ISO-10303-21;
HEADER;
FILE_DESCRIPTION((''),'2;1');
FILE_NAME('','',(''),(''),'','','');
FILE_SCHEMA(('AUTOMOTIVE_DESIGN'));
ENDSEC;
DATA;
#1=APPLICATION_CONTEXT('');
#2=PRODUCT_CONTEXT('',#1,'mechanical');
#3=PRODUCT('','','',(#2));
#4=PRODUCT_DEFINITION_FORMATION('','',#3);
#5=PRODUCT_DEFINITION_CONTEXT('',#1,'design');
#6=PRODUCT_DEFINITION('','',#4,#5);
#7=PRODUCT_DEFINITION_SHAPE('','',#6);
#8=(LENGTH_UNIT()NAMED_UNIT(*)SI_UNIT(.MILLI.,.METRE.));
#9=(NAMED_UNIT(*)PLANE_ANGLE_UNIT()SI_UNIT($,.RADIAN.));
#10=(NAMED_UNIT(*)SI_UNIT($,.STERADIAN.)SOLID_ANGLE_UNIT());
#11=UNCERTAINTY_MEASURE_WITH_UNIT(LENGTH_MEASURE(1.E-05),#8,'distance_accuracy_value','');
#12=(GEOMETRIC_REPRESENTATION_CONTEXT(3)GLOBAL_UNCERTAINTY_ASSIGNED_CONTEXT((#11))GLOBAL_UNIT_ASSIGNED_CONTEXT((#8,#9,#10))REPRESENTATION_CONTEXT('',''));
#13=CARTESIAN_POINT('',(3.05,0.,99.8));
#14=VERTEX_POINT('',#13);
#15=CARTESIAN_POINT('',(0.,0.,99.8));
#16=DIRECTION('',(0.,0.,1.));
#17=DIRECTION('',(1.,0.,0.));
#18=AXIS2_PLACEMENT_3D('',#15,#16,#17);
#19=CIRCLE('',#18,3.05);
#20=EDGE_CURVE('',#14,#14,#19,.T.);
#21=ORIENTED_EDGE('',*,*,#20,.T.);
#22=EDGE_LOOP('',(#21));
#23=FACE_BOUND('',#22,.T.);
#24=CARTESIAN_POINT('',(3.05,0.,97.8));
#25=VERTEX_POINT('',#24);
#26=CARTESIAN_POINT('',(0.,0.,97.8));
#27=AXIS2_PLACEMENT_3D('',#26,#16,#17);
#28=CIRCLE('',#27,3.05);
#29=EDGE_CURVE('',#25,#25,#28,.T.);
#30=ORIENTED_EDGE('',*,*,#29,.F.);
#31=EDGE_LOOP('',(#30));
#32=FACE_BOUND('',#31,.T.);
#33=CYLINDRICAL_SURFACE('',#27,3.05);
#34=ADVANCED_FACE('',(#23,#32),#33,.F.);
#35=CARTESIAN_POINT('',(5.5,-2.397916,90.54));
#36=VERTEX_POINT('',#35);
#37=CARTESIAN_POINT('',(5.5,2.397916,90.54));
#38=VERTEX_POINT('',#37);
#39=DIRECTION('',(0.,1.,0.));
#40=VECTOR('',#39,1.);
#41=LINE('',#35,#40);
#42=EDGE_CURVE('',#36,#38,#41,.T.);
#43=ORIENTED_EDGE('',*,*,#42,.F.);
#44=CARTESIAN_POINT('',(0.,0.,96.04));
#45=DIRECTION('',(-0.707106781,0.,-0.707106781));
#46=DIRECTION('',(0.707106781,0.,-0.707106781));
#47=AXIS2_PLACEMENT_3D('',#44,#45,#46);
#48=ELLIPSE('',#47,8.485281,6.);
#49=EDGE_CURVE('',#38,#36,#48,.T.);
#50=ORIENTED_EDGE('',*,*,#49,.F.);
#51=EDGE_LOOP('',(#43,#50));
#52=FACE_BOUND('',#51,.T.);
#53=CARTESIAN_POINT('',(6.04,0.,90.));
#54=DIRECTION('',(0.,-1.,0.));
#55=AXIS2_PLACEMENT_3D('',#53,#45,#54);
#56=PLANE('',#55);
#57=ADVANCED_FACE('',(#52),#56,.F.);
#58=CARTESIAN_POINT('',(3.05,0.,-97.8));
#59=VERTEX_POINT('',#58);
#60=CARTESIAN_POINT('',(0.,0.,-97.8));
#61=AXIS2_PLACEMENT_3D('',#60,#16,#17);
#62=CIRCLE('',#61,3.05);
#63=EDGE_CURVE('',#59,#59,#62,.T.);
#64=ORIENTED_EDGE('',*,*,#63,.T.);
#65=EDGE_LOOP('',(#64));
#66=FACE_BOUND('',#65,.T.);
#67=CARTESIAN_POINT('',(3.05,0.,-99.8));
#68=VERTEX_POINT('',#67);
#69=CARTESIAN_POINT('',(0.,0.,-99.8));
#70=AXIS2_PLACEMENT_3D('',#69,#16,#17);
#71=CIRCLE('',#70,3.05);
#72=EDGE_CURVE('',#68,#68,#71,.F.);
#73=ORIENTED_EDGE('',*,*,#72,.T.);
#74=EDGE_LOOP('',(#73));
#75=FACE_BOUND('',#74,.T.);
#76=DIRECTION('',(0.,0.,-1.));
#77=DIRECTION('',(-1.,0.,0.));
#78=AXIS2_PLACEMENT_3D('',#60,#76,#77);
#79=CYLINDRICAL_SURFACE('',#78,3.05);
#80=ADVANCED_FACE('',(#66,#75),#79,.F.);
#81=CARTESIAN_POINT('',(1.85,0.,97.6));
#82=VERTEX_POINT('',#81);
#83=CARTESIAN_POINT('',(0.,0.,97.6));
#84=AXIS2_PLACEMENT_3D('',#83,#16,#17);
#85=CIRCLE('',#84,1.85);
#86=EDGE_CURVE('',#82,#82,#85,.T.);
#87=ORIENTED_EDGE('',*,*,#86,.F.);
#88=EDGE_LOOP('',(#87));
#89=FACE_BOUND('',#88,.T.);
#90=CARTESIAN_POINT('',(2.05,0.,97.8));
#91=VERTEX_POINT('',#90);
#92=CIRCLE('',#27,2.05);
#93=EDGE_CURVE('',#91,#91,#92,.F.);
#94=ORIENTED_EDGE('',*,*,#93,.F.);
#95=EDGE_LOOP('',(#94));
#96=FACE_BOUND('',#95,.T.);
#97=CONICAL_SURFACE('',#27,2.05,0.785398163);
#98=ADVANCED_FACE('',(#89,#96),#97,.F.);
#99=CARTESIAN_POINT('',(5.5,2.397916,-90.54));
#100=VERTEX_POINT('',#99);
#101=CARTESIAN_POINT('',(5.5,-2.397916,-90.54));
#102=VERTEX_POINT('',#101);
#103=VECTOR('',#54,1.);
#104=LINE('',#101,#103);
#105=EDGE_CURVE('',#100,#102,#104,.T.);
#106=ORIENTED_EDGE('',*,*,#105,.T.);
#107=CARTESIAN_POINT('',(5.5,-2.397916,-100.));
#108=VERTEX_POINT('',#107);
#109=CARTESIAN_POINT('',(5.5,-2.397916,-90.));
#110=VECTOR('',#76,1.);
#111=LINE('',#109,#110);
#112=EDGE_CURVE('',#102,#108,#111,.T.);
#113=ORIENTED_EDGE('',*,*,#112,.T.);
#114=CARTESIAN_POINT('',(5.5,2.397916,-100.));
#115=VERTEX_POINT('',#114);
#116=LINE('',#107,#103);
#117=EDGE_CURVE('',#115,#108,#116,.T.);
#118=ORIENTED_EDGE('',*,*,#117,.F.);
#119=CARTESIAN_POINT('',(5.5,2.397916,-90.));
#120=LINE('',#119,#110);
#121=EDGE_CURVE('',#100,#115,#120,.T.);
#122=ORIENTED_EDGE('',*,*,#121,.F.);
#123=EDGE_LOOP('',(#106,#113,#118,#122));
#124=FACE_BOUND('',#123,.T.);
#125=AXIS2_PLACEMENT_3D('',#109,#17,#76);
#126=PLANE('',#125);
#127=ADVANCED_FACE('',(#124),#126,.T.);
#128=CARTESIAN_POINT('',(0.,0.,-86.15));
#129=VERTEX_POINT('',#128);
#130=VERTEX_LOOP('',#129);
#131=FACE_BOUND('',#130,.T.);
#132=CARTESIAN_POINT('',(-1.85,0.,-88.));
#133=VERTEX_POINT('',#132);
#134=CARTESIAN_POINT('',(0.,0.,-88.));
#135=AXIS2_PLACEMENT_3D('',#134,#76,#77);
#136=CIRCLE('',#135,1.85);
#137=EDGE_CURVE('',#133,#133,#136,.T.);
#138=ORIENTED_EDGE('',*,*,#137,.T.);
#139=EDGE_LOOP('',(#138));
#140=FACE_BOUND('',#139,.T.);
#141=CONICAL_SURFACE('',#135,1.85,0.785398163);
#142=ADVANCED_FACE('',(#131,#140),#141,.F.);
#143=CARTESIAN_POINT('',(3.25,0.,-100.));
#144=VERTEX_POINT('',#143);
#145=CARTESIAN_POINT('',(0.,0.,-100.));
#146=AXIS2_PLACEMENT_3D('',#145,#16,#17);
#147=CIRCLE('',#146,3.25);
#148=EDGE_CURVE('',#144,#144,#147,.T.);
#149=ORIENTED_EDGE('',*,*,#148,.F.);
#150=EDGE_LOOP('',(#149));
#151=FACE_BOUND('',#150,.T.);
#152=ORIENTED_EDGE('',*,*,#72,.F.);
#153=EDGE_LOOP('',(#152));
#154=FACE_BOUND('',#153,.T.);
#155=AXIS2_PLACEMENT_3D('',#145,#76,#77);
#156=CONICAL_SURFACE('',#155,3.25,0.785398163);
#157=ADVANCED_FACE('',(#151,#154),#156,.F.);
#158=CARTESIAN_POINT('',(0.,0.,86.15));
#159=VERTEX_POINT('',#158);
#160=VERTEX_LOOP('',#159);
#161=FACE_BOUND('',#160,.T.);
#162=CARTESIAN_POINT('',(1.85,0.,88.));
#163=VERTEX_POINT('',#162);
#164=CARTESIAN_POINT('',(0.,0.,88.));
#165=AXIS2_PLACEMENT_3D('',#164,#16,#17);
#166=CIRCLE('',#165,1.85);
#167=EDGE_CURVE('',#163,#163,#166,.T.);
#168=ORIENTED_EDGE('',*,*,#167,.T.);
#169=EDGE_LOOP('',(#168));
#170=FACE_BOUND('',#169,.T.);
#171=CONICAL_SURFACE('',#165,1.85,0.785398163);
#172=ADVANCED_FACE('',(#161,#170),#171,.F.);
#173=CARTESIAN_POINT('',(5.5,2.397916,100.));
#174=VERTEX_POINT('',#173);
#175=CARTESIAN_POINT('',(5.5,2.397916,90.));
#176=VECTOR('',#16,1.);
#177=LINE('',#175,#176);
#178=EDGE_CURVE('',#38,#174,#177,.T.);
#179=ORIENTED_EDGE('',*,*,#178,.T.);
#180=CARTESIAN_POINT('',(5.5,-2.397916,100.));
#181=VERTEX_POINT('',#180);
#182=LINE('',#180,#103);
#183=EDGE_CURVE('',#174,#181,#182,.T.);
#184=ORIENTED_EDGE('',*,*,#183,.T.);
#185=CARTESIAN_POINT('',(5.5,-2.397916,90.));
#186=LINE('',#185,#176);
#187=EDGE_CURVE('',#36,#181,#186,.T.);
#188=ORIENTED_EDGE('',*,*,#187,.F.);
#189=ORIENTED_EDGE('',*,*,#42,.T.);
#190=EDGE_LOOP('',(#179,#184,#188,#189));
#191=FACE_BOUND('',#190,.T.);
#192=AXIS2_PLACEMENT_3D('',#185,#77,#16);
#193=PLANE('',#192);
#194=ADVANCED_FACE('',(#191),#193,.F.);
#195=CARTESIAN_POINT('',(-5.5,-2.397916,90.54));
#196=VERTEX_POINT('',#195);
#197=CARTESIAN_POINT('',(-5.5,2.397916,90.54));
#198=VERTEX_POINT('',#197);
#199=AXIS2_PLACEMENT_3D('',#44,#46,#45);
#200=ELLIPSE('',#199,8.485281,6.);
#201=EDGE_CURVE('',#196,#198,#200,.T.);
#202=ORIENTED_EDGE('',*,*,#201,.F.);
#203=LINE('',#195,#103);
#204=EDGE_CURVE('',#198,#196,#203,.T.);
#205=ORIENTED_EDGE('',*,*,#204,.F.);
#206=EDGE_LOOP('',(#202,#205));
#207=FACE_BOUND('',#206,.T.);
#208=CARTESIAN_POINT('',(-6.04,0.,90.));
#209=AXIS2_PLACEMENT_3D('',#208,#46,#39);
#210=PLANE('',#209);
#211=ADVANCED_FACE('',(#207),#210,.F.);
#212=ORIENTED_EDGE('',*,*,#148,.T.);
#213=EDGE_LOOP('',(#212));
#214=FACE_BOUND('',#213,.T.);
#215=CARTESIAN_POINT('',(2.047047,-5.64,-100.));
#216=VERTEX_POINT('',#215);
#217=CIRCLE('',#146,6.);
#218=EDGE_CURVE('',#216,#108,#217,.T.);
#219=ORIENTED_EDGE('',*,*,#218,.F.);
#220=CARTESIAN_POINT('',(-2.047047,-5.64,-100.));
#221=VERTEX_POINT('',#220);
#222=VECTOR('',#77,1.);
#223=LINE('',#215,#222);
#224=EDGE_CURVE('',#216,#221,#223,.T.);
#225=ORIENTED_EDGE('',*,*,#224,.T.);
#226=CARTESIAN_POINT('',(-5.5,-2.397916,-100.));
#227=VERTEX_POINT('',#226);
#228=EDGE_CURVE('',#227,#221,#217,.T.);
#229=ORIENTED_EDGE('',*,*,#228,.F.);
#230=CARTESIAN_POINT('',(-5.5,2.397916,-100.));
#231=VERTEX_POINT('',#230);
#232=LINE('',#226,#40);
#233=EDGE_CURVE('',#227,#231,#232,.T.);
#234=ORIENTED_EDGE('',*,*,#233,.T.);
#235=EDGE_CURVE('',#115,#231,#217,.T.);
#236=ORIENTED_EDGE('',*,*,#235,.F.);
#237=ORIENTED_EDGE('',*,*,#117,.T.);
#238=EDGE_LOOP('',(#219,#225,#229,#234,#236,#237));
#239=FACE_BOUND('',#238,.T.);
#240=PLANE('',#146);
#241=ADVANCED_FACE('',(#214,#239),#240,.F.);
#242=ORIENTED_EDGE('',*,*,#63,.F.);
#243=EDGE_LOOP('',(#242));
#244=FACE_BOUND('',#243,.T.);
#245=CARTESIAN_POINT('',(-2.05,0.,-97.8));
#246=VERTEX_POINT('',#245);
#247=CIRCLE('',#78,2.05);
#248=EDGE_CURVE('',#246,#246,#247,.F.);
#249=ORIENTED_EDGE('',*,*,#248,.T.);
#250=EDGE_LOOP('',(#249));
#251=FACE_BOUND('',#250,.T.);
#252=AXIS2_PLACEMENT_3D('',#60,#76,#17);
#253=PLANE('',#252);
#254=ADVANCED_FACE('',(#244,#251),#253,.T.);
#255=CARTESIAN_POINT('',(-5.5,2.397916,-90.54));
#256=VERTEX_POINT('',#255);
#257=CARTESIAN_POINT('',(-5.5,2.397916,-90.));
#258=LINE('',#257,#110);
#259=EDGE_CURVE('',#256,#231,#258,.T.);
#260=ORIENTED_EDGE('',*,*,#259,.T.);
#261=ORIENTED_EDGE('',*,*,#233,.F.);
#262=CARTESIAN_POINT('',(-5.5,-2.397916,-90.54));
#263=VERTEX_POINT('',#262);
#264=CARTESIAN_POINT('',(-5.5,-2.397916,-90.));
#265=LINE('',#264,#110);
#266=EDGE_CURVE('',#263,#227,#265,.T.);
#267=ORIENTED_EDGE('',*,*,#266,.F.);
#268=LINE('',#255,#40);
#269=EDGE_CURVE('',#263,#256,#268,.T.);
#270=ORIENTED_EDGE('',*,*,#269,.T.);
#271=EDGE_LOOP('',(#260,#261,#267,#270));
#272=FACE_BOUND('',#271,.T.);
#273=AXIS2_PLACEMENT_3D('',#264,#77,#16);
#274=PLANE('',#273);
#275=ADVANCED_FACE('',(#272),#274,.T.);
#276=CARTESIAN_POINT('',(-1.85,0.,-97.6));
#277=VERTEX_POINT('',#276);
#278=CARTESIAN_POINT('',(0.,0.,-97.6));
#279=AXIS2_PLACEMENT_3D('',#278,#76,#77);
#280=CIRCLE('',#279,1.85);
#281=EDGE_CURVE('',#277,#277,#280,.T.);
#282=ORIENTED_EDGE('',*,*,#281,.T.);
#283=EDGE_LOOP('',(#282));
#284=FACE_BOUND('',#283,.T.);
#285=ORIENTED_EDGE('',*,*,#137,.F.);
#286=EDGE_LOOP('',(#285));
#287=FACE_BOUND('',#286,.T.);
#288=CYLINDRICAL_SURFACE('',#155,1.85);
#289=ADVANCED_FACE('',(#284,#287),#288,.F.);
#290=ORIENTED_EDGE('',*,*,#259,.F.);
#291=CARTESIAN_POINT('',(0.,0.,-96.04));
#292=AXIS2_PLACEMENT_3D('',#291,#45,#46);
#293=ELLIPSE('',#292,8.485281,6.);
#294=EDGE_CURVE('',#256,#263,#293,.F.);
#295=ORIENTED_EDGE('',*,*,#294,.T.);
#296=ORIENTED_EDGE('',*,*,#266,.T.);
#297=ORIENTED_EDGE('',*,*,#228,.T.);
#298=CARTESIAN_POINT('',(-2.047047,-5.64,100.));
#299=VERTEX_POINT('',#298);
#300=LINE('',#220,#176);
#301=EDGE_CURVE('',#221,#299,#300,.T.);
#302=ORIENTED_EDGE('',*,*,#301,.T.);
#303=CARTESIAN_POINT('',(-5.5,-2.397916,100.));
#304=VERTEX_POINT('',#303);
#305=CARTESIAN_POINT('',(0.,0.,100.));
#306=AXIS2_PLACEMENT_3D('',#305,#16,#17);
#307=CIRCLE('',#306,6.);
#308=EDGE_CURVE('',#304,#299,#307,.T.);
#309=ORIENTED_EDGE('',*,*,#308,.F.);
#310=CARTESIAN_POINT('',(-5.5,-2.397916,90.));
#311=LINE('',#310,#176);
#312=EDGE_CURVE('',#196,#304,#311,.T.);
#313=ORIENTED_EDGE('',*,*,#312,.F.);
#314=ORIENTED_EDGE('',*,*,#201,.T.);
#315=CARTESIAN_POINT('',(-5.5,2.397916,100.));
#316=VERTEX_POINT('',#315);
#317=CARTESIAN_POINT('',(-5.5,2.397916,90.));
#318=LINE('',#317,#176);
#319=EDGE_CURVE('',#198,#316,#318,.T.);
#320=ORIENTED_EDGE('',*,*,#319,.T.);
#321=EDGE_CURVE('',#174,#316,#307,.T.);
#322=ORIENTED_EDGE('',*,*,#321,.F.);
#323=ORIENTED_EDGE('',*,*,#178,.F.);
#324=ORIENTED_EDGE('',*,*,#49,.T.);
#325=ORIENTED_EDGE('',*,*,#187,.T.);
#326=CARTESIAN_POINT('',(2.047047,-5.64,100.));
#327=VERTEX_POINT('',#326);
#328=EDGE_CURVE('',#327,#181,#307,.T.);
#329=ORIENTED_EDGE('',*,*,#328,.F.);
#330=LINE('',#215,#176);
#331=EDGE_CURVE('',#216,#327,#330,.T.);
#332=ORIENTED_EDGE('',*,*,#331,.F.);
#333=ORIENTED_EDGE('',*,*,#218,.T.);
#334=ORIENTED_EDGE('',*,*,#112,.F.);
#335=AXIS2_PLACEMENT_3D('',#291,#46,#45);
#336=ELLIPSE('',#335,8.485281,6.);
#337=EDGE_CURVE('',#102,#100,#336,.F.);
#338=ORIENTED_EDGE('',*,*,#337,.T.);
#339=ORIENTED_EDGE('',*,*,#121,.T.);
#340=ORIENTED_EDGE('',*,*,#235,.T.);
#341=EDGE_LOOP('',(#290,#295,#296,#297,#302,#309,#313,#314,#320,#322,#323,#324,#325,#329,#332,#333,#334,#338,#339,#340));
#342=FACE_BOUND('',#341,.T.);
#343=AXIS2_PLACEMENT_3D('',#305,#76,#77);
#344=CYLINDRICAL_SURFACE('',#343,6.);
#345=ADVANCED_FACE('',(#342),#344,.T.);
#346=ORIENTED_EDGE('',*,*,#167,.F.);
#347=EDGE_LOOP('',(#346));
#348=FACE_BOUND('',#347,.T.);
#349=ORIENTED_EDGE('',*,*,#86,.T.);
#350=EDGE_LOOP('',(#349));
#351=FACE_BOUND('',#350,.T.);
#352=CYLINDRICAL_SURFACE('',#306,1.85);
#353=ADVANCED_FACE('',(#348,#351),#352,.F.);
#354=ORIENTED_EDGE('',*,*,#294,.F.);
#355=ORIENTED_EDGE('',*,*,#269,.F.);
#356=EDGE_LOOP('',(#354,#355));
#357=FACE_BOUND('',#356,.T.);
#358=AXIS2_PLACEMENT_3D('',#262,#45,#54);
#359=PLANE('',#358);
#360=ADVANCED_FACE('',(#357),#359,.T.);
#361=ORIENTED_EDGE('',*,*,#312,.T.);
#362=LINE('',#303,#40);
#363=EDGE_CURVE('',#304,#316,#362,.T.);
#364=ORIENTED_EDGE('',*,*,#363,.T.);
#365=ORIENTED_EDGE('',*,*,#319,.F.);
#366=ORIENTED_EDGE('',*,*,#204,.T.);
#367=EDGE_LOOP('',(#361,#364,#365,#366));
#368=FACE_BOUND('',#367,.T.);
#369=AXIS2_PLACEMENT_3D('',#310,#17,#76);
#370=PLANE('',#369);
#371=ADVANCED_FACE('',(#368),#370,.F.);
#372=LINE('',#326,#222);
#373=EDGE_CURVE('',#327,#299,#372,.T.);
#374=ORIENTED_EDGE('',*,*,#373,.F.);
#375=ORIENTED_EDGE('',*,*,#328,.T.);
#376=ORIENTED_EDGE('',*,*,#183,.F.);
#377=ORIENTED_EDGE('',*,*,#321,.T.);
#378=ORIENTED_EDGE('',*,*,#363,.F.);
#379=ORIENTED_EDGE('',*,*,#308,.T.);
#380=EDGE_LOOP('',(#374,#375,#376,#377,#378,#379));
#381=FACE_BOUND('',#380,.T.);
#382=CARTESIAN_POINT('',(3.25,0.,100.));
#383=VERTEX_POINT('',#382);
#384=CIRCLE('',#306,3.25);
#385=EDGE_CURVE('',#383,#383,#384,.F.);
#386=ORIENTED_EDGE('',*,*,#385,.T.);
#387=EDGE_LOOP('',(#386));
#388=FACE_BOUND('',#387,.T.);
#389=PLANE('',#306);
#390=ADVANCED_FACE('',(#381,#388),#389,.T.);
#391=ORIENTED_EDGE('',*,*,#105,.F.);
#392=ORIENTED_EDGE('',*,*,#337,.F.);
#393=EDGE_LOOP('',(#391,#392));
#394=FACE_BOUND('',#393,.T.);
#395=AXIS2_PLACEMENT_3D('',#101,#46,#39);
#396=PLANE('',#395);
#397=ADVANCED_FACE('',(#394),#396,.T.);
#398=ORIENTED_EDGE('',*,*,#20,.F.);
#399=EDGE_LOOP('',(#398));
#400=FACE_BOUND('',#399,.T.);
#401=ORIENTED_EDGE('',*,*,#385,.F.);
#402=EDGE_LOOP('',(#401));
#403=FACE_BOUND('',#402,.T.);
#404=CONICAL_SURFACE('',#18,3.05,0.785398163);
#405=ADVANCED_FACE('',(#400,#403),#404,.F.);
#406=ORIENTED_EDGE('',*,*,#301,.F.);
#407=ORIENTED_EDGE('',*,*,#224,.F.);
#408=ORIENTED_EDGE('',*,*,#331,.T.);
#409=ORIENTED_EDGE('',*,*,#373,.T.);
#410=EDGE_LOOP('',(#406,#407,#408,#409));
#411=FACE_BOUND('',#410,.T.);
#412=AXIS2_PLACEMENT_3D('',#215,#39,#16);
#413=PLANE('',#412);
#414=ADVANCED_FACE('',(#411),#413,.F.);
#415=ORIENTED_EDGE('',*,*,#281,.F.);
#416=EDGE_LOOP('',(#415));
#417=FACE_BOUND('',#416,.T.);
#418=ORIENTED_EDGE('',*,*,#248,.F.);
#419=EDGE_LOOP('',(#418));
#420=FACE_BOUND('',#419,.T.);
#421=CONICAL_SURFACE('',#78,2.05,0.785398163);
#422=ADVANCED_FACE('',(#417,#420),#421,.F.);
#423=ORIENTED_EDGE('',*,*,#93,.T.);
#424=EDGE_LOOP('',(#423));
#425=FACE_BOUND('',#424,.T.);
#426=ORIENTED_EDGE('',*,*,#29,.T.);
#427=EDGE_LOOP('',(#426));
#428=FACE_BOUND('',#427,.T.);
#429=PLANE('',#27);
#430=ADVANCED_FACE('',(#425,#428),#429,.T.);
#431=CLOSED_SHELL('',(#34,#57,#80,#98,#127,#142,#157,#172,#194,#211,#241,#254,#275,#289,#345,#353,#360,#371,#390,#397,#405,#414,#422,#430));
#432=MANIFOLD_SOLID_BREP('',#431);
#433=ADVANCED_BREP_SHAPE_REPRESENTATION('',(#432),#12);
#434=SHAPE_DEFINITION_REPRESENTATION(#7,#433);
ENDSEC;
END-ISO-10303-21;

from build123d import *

# Parameters (mm, degrees)
SKETCH1_R                = 6
BOSS_EXTRUDE1_DEPTH      = 100
SKETCH5_R                = 3.05
CUT_EXTRUDE1_DEPTH       = 2.2
CHAMFER1_SIZE            = 0.2
CUT_EXTRUDE2_DEPTH       = 201.179919073
CUT_EXTRUDE4_DEPTH       = 10
CHAMFER3_SIZE            = 0.54
CHAMFER3_OF_MIRROR3_SIZE = 0.54


with BuildPart() as part:
    # Sketch1 → Boss-Extrude1 (new, symmetric)
    with BuildSketch(Plane.XY):
        Circle(SKETCH1_R)
    extrude(amount=BOSS_EXTRUDE1_DEPTH, both=True)

    # Sketch4 → Hole1 (revolve, cut)
    with BuildSketch(Plane(origin=(0, 0, 100), x_dir=(0, -1, 0), z_dir=(1, 0, 0))):
        Polygon((0, 0), (0, 13.85), (1.85, 12), (1.85, 0), align=None)
    hole1 = revolve(axis=Axis((0, 0, 104.244199587), (0, 0, -1)), mode=Mode.SUBTRACT)

    # Sketch5 → Cut-Extrude1 (cut)
    with BuildSketch(Plane.XY.offset(100)):
        Circle(SKETCH5_R)
    cut_extrude1 = extrude(amount=-CUT_EXTRUDE1_DEPTH, mode=Mode.SUBTRACT)

    # Mirror2: Hole1, Cut-Extrude1 across plane
    add(hole1.mirror(Plane.XY), mode=Mode.SUBTRACT)
    add(cut_extrude1.mirror(Plane.XY), mode=Mode.SUBTRACT)

    # Chamfer1
    chamfer1_edges = [part.edges().sort_by_distance(p)[0] for p in [
        (-3.05, 0, 100),
        (0, 1.85, 97.8),
        (-3.05, 0, -100),
        (0, 1.85, -97.8),
    ]]
    chamfer(chamfer1_edges, length=CHAMFER1_SIZE)

    # Sketch6 → Cut-Extrude2 (cut, through all)
    with BuildSketch(Plane.XY.offset(100)):
        with BuildLine():
            Line((2.047046653, -5.64), (-2.047046653, -5.64))
            ThreePointArc((-2.047046653, -5.64), (0, -6), (2.047046653, -5.64))
        make_face()
    extrude(amount=-CUT_EXTRUDE2_DEPTH, mode=Mode.SUBTRACT)

    # Sketch9 → Cut-Extrude4 (cut)
    with BuildSketch(Plane.XY.offset(100)):
        with BuildLine():
            Line((-5.5, -2.397915762), (-5.5, 2.397915762))
            ThreePointArc((-5.5, 2.397915762), (-6, 0), (-5.5, -2.397915762))
        make_face()
        with BuildLine():
            Line((5.5, -2.397915762), (5.5, 2.397915762))
            ThreePointArc((5.5, 2.397915762), (6, 0), (5.5, -2.397915762))
        make_face()
    cut_extrude4 = extrude(amount=-CUT_EXTRUDE4_DEPTH, mode=Mode.SUBTRACT)

    # Chamfer3
    # the kernel refuses this chamfer: 0.54 mm, written as the material it adds along each edge
    with BuildSketch(Plane(origin=(5.5, -3.786624575, 90), x_dir=(-0.027495876610584932, 0, 0.9996219169112968), z_dir=(0, 1, 0))) as chamfer3_piece_1_section:
        Polygon((CHAMFER3_SIZE * 0.999621916911, CHAMFER3_SIZE * 0.0274958766106), (-CHAMFER3_SIZE * 0.0274958766106, CHAMFER3_SIZE * 0.999621916911), (0, 0), align=None)
    chamfer3_piece_1 = extrude(amount=7.57324915, mode=Mode.PRIVATE)
    chamfer3_piece_1 = chamfer3_piece_1 & Plane(origin=(0, 0, 90.196712304), x_dir=(1, 0, 0), z_dir=(0, 0, 1)) * Cylinder(6, 18, mode=Mode.PRIVATE)
    add(chamfer3_piece_1)
    with BuildSketch(Plane(origin=(-5.5, -3.786624575, 90), x_dir=(0.027495876610584932, 0, 0.9996219169112968), z_dir=(0, 1, 0))) as chamfer3_piece_2_section:
        Polygon((CHAMFER3_SIZE * 0.999621916911, -CHAMFER3_SIZE * 0.0274958766106), (-CHAMFER3_SIZE * 0.0274958766106, -CHAMFER3_SIZE * 0.999621916911), (0, 0), align=None)
    chamfer3_piece_2 = extrude(amount=7.57324915, mode=Mode.PRIVATE)
    chamfer3_piece_2 = chamfer3_piece_2 & Plane(origin=(0, 0, 90.196712302), x_dir=(1, 0, 0), z_dir=(0, 0, 1)) * Cylinder(6, 18, mode=Mode.PRIVATE)
    add(chamfer3_piece_2)

    # Mirror3: Cut-Extrude4 across plane
    add(cut_extrude4.mirror(Plane.XY), mode=Mode.SUBTRACT)

    # Chamfer3 of Mirror3
    # the kernel refuses this chamfer: 0.54 mm, written as the material it adds along each edge
    with BuildSketch(Plane(origin=(5.5, -3.786624575, -90), x_dir=(-0.027495876610584932, 0, -0.9996219169112968), z_dir=(0, 1, 0))) as chamfer3_of_mirror3_piece_1_section:
        Polygon((CHAMFER3_OF_MIRROR3_SIZE * 0.999621916911, -CHAMFER3_OF_MIRROR3_SIZE * 0.0274958766106), (-CHAMFER3_OF_MIRROR3_SIZE * 0.0274958766106, -CHAMFER3_OF_MIRROR3_SIZE * 0.999621916911), (0, 0), align=None)
    chamfer3_of_mirror3_piece_1 = extrude(amount=7.57324915, mode=Mode.PRIVATE)
    chamfer3_of_mirror3_piece_1 = chamfer3_of_mirror3_piece_1 & Plane(origin=(0, 0, -90.196712304), x_dir=(1, 0, 0), z_dir=(0, 0, 1)) * Cylinder(6, 18, mode=Mode.PRIVATE)
    add(chamfer3_of_mirror3_piece_1)
    with BuildSketch(Plane(origin=(-5.5, -3.786624575, -90), x_dir=(0.027495876610584932, 0, -0.9996219169112968), z_dir=(0, 1, 0))) as chamfer3_of_mirror3_piece_2_section:
        Polygon((CHAMFER3_OF_MIRROR3_SIZE * 0.999621916911, CHAMFER3_OF_MIRROR3_SIZE * 0.0274958766106), (-CHAMFER3_OF_MIRROR3_SIZE * 0.0274958766106, CHAMFER3_OF_MIRROR3_SIZE * 0.999621916911), (0, 0), align=None)
    chamfer3_of_mirror3_piece_2 = extrude(amount=7.57324915, mode=Mode.PRIVATE)
    chamfer3_of_mirror3_piece_2 = chamfer3_of_mirror3_piece_2 & Plane(origin=(0, 0, -90.196712302), x_dir=(1, 0, 0), z_dir=(0, 0, 1)) * Cylinder(6, 18, mode=Mode.PRIVATE)
    add(chamfer3_of_mirror3_piece_2)


solid = part.part
